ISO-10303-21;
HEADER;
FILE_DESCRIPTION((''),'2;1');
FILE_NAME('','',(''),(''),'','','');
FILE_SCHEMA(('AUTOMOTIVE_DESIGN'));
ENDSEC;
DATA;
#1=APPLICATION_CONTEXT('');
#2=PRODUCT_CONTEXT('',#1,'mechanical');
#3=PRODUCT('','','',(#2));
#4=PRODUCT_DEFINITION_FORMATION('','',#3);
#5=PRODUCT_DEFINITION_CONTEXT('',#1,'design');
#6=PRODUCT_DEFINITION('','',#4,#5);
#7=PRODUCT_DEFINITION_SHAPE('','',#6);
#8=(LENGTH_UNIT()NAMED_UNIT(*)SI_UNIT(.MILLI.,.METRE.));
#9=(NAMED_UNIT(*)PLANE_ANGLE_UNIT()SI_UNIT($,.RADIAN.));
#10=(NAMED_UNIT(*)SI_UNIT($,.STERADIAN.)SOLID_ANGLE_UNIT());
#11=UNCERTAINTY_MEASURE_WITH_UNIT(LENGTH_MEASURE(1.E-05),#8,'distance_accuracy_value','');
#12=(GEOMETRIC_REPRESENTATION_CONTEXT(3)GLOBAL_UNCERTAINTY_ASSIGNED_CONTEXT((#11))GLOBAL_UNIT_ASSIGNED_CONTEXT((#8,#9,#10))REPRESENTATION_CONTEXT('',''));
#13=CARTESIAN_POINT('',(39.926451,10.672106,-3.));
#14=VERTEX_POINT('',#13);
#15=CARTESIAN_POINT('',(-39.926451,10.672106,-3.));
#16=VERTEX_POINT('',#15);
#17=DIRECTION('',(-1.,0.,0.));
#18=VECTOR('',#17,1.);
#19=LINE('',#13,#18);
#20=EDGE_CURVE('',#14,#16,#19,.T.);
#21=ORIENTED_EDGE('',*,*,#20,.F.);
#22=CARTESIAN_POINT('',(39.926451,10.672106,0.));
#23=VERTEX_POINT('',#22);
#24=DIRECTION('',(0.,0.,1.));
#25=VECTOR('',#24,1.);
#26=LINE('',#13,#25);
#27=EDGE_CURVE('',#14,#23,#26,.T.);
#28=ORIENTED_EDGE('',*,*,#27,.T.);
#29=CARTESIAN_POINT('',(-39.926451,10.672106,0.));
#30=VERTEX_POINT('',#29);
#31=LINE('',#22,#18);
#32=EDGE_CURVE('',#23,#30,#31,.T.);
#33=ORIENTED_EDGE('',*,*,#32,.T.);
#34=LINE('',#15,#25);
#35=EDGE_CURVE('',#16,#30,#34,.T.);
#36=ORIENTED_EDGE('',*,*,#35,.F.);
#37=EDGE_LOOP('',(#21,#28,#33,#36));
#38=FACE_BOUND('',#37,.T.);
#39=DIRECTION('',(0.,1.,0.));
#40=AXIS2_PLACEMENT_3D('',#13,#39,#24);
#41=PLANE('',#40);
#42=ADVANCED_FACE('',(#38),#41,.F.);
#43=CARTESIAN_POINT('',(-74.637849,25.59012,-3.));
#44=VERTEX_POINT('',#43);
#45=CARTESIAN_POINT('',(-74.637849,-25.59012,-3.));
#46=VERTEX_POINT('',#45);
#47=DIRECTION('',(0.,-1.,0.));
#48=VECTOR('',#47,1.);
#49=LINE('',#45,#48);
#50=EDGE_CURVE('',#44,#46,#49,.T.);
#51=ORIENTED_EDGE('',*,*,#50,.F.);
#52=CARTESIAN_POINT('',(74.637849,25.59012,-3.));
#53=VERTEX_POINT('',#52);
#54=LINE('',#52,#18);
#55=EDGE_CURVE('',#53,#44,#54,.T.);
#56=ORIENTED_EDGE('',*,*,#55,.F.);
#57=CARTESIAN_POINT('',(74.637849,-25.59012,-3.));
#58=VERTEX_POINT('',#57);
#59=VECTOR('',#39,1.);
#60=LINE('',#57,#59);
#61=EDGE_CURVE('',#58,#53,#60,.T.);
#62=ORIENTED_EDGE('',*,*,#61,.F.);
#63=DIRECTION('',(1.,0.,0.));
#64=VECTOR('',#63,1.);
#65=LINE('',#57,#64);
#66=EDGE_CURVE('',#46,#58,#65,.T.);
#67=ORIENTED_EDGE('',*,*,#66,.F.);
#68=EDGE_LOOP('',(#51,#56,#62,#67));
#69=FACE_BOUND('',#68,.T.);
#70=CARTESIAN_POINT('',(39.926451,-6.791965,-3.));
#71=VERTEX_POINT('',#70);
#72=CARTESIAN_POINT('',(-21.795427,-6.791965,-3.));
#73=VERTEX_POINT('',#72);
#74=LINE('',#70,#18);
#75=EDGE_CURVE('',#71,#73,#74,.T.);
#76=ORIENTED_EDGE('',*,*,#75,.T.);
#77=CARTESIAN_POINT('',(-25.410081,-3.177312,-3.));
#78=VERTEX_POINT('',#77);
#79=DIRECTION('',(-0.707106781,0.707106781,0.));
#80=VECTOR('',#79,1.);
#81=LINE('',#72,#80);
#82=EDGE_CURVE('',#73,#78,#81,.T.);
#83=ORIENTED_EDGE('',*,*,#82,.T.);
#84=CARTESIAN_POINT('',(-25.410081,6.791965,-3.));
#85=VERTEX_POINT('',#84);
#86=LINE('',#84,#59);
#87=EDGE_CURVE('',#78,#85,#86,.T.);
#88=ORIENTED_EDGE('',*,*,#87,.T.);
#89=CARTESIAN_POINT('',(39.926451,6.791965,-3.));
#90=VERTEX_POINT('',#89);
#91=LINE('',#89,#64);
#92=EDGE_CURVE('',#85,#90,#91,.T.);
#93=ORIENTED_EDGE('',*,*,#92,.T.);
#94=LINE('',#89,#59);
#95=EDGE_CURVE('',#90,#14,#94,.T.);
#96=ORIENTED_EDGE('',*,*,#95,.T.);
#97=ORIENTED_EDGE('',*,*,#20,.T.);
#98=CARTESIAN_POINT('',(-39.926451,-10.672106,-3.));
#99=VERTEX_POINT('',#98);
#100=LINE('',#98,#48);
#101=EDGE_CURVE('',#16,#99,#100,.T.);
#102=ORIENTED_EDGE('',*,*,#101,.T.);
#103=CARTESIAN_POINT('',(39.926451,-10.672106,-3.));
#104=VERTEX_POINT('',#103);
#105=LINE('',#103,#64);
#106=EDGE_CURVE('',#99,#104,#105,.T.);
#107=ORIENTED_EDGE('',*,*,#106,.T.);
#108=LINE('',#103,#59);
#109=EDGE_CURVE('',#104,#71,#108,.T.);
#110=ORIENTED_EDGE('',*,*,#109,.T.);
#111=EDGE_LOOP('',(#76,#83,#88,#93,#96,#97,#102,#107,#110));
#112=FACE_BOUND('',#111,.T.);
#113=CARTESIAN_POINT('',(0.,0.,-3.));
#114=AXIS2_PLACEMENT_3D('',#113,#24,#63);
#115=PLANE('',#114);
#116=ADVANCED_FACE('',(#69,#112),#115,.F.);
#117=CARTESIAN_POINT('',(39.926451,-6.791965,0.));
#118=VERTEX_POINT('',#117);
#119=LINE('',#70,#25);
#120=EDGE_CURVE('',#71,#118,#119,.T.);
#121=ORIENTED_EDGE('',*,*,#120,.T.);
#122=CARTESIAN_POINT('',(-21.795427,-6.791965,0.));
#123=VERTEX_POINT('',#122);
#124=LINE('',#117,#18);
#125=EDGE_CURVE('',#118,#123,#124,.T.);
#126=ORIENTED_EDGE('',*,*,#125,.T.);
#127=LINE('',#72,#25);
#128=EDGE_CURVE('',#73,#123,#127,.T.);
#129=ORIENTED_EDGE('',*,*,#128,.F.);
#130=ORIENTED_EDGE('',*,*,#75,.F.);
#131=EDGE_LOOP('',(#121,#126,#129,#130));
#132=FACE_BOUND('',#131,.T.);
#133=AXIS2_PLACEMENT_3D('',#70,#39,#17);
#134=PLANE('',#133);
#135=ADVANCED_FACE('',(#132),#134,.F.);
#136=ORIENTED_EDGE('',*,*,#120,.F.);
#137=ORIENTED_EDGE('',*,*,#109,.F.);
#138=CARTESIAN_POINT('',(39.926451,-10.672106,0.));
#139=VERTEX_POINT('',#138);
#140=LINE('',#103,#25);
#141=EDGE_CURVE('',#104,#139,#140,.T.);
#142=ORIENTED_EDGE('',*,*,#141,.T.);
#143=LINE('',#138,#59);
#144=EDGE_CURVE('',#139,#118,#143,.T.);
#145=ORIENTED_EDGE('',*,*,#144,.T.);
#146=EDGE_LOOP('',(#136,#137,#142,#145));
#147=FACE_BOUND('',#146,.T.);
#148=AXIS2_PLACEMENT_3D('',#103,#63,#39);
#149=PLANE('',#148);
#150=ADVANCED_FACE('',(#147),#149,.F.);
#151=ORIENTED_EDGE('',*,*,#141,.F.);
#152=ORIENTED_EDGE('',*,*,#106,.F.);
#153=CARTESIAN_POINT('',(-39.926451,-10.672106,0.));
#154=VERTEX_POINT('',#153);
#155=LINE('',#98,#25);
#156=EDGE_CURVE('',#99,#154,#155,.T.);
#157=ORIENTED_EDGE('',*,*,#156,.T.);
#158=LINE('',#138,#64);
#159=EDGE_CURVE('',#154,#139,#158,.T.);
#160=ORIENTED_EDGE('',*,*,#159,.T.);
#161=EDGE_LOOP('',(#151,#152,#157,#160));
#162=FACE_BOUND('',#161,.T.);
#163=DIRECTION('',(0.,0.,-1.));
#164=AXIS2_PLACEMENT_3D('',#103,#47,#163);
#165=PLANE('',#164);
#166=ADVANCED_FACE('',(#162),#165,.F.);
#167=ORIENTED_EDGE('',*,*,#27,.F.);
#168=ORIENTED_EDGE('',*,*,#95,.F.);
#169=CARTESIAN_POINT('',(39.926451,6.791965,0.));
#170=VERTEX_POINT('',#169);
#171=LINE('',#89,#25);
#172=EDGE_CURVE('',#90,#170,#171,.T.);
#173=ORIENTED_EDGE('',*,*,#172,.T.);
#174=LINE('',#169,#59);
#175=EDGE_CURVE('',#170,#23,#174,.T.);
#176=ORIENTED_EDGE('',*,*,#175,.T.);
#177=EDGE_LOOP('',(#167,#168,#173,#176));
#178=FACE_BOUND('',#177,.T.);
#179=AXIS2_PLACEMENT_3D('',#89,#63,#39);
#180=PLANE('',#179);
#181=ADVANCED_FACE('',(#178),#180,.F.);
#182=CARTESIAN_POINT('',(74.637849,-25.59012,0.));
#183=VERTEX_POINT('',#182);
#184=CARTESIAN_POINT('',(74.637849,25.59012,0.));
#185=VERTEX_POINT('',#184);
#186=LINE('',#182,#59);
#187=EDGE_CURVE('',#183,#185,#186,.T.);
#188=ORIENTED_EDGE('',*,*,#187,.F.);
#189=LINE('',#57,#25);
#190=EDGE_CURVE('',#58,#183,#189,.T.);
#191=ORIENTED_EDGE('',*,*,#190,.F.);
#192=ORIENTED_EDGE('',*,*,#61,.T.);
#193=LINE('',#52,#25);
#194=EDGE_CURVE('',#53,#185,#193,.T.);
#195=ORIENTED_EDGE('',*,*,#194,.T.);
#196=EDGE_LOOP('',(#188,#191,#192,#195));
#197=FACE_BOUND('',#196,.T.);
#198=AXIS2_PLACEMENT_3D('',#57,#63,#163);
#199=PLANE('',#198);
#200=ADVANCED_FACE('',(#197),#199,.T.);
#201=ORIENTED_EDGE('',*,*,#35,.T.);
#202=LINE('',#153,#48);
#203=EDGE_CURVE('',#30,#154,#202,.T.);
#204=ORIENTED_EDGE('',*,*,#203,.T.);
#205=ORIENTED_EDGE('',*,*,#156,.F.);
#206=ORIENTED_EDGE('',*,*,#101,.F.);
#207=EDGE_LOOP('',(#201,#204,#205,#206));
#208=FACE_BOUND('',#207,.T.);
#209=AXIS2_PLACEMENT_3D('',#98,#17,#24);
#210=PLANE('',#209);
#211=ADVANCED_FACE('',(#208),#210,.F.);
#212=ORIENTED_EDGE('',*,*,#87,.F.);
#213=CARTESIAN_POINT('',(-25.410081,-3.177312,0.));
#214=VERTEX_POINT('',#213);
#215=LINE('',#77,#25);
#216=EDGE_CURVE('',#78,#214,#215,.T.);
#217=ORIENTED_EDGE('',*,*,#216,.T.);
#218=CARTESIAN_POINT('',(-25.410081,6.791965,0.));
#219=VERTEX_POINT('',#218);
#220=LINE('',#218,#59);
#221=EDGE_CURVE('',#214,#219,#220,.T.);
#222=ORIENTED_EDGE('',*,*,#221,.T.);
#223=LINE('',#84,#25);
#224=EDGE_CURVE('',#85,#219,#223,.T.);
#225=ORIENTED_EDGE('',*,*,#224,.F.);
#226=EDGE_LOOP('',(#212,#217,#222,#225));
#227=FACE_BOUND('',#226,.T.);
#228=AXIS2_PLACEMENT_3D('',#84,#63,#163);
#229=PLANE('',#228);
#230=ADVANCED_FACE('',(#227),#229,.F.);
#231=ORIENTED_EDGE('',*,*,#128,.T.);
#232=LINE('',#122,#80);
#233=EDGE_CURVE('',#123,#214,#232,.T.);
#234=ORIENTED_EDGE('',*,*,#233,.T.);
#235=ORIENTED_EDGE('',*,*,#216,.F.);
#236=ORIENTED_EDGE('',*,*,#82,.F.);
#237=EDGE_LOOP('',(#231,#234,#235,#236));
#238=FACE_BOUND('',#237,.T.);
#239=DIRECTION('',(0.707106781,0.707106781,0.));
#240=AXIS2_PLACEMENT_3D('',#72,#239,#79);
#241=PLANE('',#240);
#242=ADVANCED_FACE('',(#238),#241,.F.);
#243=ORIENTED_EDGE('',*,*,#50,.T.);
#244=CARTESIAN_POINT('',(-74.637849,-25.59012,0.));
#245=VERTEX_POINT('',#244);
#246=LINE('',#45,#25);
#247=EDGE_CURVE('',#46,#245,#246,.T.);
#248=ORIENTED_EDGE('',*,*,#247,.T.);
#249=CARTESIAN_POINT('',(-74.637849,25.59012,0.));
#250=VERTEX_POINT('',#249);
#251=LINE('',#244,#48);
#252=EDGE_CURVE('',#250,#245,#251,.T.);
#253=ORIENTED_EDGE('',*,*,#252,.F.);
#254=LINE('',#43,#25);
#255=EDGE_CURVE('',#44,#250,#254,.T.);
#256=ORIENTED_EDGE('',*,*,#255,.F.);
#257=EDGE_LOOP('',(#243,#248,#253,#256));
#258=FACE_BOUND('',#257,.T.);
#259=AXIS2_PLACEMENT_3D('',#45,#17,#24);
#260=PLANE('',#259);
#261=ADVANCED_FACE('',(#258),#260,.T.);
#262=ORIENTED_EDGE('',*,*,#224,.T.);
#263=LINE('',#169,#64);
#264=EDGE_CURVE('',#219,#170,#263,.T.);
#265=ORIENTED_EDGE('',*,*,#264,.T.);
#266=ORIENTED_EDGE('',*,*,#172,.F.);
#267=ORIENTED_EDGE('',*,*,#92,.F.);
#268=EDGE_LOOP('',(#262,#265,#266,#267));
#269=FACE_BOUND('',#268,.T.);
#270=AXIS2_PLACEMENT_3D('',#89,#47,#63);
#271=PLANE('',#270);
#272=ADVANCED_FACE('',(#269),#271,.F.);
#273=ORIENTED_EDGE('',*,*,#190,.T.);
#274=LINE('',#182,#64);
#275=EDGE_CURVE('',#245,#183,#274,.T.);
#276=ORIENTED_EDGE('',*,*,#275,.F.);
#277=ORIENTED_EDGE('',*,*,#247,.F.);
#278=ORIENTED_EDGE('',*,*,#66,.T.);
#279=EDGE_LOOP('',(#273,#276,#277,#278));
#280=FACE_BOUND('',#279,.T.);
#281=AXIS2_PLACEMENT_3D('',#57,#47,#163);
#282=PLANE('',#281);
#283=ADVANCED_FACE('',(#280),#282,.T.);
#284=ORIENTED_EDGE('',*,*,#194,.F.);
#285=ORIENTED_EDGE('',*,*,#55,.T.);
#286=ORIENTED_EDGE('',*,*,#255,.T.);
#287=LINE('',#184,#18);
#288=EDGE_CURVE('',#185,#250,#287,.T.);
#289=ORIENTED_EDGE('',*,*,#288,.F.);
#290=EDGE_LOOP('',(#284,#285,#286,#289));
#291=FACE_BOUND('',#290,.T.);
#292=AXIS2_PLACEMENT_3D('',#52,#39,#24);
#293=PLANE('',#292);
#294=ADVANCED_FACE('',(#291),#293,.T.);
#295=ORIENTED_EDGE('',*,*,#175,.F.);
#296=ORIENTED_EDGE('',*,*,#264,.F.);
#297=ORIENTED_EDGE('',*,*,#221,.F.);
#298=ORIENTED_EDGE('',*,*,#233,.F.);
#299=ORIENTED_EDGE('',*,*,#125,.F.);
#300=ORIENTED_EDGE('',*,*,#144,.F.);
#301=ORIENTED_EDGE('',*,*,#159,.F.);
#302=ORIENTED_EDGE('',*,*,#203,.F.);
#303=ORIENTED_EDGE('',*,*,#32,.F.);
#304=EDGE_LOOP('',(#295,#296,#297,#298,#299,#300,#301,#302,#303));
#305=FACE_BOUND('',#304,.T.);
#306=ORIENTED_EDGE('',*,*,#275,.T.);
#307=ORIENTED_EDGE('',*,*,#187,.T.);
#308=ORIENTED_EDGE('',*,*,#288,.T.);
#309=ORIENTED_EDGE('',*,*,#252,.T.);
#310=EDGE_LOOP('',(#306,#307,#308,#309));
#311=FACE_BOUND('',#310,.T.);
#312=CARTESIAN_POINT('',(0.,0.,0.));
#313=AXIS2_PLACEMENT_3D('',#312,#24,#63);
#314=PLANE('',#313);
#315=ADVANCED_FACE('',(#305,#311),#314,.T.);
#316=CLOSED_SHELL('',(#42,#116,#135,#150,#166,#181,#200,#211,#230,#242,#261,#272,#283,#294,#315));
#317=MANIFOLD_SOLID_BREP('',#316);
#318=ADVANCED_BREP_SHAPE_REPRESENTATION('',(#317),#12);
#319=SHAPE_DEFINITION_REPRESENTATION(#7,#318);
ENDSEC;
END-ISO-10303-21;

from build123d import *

# Parameters (mm, degrees)
F_1_FR_W               = 149.275698602
F_1_FR_H               = 51.18023952
SM_BASE_FLANGE_1_DEPTH = 3


# Sheet-metal steps are written as plain solids
with BuildPart() as part:
    # Эскиз1_fr → Базовая кромка1 (new body)
    with BuildSketch(Plane.XY):
        Rectangle(F_1_FR_W, F_1_FR_H)
        Polygon((39.926451229, -10.672105555), (-39.926451229, -10.672105555), (-39.926451229, 10.672105555), (39.926451229, 10.672105555), (39.926451229, 6.791965083), (-25.410080628, 6.791965083), (-25.410080628, -3.177311756), (-21.795427302, -6.791965083), (39.926451229, -6.791965083), align=None, mode=Mode.SUBTRACT)
    extrude(amount=-SM_BASE_FLANGE_1_DEPTH)


solid = part.part
